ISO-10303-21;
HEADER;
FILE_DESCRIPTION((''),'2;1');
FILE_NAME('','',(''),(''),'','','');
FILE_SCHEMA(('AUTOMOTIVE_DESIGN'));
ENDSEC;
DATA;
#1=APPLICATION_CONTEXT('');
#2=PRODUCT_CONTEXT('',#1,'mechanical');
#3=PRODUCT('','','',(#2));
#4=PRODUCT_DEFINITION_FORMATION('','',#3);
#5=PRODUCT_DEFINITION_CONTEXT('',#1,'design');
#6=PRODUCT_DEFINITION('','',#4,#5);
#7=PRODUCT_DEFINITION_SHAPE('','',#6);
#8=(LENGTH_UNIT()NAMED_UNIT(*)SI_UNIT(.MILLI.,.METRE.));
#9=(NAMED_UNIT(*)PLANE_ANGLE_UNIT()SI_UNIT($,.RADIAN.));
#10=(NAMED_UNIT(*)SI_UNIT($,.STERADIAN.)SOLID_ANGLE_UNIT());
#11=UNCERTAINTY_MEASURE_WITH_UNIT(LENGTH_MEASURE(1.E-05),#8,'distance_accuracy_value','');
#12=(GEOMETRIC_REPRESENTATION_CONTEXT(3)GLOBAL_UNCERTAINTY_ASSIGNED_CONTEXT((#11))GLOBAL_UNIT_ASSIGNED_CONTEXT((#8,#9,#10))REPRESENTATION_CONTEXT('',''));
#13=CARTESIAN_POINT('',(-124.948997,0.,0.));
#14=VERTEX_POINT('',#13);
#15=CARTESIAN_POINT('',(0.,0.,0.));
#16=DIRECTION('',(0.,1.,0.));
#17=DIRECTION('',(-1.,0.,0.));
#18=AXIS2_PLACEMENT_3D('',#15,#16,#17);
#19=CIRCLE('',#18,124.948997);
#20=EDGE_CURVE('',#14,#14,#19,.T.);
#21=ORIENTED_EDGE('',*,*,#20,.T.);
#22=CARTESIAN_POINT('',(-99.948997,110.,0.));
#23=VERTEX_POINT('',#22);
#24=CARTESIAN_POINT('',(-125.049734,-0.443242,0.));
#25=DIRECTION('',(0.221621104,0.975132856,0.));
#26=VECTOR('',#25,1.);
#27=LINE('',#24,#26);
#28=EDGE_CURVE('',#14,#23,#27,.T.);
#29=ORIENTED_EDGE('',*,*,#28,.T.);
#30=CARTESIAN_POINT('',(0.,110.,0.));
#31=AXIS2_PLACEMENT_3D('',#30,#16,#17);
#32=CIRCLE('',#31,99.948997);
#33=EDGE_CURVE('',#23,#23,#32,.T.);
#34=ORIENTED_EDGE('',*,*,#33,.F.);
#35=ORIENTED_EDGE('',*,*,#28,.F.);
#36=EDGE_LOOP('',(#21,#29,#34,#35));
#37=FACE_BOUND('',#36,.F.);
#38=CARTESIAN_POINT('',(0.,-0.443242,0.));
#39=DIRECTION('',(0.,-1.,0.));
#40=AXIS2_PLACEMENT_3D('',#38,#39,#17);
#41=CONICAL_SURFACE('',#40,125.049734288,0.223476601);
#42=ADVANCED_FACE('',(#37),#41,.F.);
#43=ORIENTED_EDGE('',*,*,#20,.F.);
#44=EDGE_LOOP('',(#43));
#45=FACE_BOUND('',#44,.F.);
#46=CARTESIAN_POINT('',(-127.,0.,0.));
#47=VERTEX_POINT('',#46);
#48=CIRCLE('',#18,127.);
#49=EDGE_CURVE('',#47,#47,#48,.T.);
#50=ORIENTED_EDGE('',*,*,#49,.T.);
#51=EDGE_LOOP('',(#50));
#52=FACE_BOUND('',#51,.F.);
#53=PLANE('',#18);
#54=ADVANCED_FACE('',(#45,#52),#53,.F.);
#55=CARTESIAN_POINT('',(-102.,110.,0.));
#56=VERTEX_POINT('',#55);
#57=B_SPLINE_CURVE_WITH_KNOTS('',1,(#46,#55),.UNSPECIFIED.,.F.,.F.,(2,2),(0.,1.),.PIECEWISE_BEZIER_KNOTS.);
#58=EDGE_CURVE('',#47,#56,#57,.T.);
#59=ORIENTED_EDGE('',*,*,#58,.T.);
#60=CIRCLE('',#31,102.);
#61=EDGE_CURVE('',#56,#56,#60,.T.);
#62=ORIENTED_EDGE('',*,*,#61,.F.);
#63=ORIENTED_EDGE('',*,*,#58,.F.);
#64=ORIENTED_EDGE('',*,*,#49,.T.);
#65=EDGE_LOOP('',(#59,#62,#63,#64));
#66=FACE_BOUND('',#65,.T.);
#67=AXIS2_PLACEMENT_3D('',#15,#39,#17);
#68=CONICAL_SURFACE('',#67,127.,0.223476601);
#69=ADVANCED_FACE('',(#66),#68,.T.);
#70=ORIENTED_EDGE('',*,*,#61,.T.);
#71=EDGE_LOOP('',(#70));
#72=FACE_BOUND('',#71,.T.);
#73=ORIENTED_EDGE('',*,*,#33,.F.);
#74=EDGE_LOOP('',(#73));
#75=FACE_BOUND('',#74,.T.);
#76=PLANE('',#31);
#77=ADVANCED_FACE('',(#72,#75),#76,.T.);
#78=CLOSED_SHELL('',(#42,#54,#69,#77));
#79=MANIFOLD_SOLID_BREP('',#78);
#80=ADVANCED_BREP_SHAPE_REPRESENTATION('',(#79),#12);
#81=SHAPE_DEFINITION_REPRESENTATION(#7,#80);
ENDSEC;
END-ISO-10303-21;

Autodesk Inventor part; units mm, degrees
ref_plane "YZ Plane" through (0, 0, 0) normal (1, 0, 0) x (0, 1, 0)
ref_plane "XY Plane" through (0, 0, 0) normal (0, 0, 1) x (1, 0, 0)
sketch "Szkic6" plane through (0, 0, 0) normal (0, 1, 0) x (-1, 0, 0)
  circle A0 centre (0, 0) radius 127
  dimension "d33" = 254
ref_plane "Płaszczyzna konstrukcyjna1" through (0, 110, 0) normal (0, 1, 0) x (-1, 0, 0)
sketch "Szkic7" plane through (0, 110, 0) normal (0, 1, 0) x (-1, 0, 0)
  circle A0 centre (0, 0) radius 102
  dimension "d35" = 204
loft "Wyciągnięcie złożone1" add profiles "Szkic6", "Szkic7"
shell "Skorupa1" thickness 2 removed faces 2 at (-23.2432, 110, 54.3964) at (-5.9373, 0, -40.5182)
equation "\"d33\" = OD1"
equation "\"d35\" = OD2"
equation "\"d52\" = THK"
equation "\"SzerokośćGięciaPodcięcia\" = Grubość"
equation "\"RozmiarPodcięciaNarożnika\" = 4 * Grubość"
equation "\"PromieńPrzejścia\" = PromieńGięcia"
equation "\"Rozmiar_promienia_Jacobiego\" = PromieńGięcia"
equation "\"Wielk_odstępu\" = Grubość"
equation "\"d2\" = PromieńGięcia"
equation "\"d23\" = PromieńGięcia"
equation "\"OD1\" = 254"
equation "\"OD2\" = 204"
equation "\"THK\" = 2"
equation "\"Grubość\" = 1.5"
equation "\"PromieńGięcia\" = 3"
properties part number "Redukcja symetryczna Ø254x204x2 L=110" material "304"
